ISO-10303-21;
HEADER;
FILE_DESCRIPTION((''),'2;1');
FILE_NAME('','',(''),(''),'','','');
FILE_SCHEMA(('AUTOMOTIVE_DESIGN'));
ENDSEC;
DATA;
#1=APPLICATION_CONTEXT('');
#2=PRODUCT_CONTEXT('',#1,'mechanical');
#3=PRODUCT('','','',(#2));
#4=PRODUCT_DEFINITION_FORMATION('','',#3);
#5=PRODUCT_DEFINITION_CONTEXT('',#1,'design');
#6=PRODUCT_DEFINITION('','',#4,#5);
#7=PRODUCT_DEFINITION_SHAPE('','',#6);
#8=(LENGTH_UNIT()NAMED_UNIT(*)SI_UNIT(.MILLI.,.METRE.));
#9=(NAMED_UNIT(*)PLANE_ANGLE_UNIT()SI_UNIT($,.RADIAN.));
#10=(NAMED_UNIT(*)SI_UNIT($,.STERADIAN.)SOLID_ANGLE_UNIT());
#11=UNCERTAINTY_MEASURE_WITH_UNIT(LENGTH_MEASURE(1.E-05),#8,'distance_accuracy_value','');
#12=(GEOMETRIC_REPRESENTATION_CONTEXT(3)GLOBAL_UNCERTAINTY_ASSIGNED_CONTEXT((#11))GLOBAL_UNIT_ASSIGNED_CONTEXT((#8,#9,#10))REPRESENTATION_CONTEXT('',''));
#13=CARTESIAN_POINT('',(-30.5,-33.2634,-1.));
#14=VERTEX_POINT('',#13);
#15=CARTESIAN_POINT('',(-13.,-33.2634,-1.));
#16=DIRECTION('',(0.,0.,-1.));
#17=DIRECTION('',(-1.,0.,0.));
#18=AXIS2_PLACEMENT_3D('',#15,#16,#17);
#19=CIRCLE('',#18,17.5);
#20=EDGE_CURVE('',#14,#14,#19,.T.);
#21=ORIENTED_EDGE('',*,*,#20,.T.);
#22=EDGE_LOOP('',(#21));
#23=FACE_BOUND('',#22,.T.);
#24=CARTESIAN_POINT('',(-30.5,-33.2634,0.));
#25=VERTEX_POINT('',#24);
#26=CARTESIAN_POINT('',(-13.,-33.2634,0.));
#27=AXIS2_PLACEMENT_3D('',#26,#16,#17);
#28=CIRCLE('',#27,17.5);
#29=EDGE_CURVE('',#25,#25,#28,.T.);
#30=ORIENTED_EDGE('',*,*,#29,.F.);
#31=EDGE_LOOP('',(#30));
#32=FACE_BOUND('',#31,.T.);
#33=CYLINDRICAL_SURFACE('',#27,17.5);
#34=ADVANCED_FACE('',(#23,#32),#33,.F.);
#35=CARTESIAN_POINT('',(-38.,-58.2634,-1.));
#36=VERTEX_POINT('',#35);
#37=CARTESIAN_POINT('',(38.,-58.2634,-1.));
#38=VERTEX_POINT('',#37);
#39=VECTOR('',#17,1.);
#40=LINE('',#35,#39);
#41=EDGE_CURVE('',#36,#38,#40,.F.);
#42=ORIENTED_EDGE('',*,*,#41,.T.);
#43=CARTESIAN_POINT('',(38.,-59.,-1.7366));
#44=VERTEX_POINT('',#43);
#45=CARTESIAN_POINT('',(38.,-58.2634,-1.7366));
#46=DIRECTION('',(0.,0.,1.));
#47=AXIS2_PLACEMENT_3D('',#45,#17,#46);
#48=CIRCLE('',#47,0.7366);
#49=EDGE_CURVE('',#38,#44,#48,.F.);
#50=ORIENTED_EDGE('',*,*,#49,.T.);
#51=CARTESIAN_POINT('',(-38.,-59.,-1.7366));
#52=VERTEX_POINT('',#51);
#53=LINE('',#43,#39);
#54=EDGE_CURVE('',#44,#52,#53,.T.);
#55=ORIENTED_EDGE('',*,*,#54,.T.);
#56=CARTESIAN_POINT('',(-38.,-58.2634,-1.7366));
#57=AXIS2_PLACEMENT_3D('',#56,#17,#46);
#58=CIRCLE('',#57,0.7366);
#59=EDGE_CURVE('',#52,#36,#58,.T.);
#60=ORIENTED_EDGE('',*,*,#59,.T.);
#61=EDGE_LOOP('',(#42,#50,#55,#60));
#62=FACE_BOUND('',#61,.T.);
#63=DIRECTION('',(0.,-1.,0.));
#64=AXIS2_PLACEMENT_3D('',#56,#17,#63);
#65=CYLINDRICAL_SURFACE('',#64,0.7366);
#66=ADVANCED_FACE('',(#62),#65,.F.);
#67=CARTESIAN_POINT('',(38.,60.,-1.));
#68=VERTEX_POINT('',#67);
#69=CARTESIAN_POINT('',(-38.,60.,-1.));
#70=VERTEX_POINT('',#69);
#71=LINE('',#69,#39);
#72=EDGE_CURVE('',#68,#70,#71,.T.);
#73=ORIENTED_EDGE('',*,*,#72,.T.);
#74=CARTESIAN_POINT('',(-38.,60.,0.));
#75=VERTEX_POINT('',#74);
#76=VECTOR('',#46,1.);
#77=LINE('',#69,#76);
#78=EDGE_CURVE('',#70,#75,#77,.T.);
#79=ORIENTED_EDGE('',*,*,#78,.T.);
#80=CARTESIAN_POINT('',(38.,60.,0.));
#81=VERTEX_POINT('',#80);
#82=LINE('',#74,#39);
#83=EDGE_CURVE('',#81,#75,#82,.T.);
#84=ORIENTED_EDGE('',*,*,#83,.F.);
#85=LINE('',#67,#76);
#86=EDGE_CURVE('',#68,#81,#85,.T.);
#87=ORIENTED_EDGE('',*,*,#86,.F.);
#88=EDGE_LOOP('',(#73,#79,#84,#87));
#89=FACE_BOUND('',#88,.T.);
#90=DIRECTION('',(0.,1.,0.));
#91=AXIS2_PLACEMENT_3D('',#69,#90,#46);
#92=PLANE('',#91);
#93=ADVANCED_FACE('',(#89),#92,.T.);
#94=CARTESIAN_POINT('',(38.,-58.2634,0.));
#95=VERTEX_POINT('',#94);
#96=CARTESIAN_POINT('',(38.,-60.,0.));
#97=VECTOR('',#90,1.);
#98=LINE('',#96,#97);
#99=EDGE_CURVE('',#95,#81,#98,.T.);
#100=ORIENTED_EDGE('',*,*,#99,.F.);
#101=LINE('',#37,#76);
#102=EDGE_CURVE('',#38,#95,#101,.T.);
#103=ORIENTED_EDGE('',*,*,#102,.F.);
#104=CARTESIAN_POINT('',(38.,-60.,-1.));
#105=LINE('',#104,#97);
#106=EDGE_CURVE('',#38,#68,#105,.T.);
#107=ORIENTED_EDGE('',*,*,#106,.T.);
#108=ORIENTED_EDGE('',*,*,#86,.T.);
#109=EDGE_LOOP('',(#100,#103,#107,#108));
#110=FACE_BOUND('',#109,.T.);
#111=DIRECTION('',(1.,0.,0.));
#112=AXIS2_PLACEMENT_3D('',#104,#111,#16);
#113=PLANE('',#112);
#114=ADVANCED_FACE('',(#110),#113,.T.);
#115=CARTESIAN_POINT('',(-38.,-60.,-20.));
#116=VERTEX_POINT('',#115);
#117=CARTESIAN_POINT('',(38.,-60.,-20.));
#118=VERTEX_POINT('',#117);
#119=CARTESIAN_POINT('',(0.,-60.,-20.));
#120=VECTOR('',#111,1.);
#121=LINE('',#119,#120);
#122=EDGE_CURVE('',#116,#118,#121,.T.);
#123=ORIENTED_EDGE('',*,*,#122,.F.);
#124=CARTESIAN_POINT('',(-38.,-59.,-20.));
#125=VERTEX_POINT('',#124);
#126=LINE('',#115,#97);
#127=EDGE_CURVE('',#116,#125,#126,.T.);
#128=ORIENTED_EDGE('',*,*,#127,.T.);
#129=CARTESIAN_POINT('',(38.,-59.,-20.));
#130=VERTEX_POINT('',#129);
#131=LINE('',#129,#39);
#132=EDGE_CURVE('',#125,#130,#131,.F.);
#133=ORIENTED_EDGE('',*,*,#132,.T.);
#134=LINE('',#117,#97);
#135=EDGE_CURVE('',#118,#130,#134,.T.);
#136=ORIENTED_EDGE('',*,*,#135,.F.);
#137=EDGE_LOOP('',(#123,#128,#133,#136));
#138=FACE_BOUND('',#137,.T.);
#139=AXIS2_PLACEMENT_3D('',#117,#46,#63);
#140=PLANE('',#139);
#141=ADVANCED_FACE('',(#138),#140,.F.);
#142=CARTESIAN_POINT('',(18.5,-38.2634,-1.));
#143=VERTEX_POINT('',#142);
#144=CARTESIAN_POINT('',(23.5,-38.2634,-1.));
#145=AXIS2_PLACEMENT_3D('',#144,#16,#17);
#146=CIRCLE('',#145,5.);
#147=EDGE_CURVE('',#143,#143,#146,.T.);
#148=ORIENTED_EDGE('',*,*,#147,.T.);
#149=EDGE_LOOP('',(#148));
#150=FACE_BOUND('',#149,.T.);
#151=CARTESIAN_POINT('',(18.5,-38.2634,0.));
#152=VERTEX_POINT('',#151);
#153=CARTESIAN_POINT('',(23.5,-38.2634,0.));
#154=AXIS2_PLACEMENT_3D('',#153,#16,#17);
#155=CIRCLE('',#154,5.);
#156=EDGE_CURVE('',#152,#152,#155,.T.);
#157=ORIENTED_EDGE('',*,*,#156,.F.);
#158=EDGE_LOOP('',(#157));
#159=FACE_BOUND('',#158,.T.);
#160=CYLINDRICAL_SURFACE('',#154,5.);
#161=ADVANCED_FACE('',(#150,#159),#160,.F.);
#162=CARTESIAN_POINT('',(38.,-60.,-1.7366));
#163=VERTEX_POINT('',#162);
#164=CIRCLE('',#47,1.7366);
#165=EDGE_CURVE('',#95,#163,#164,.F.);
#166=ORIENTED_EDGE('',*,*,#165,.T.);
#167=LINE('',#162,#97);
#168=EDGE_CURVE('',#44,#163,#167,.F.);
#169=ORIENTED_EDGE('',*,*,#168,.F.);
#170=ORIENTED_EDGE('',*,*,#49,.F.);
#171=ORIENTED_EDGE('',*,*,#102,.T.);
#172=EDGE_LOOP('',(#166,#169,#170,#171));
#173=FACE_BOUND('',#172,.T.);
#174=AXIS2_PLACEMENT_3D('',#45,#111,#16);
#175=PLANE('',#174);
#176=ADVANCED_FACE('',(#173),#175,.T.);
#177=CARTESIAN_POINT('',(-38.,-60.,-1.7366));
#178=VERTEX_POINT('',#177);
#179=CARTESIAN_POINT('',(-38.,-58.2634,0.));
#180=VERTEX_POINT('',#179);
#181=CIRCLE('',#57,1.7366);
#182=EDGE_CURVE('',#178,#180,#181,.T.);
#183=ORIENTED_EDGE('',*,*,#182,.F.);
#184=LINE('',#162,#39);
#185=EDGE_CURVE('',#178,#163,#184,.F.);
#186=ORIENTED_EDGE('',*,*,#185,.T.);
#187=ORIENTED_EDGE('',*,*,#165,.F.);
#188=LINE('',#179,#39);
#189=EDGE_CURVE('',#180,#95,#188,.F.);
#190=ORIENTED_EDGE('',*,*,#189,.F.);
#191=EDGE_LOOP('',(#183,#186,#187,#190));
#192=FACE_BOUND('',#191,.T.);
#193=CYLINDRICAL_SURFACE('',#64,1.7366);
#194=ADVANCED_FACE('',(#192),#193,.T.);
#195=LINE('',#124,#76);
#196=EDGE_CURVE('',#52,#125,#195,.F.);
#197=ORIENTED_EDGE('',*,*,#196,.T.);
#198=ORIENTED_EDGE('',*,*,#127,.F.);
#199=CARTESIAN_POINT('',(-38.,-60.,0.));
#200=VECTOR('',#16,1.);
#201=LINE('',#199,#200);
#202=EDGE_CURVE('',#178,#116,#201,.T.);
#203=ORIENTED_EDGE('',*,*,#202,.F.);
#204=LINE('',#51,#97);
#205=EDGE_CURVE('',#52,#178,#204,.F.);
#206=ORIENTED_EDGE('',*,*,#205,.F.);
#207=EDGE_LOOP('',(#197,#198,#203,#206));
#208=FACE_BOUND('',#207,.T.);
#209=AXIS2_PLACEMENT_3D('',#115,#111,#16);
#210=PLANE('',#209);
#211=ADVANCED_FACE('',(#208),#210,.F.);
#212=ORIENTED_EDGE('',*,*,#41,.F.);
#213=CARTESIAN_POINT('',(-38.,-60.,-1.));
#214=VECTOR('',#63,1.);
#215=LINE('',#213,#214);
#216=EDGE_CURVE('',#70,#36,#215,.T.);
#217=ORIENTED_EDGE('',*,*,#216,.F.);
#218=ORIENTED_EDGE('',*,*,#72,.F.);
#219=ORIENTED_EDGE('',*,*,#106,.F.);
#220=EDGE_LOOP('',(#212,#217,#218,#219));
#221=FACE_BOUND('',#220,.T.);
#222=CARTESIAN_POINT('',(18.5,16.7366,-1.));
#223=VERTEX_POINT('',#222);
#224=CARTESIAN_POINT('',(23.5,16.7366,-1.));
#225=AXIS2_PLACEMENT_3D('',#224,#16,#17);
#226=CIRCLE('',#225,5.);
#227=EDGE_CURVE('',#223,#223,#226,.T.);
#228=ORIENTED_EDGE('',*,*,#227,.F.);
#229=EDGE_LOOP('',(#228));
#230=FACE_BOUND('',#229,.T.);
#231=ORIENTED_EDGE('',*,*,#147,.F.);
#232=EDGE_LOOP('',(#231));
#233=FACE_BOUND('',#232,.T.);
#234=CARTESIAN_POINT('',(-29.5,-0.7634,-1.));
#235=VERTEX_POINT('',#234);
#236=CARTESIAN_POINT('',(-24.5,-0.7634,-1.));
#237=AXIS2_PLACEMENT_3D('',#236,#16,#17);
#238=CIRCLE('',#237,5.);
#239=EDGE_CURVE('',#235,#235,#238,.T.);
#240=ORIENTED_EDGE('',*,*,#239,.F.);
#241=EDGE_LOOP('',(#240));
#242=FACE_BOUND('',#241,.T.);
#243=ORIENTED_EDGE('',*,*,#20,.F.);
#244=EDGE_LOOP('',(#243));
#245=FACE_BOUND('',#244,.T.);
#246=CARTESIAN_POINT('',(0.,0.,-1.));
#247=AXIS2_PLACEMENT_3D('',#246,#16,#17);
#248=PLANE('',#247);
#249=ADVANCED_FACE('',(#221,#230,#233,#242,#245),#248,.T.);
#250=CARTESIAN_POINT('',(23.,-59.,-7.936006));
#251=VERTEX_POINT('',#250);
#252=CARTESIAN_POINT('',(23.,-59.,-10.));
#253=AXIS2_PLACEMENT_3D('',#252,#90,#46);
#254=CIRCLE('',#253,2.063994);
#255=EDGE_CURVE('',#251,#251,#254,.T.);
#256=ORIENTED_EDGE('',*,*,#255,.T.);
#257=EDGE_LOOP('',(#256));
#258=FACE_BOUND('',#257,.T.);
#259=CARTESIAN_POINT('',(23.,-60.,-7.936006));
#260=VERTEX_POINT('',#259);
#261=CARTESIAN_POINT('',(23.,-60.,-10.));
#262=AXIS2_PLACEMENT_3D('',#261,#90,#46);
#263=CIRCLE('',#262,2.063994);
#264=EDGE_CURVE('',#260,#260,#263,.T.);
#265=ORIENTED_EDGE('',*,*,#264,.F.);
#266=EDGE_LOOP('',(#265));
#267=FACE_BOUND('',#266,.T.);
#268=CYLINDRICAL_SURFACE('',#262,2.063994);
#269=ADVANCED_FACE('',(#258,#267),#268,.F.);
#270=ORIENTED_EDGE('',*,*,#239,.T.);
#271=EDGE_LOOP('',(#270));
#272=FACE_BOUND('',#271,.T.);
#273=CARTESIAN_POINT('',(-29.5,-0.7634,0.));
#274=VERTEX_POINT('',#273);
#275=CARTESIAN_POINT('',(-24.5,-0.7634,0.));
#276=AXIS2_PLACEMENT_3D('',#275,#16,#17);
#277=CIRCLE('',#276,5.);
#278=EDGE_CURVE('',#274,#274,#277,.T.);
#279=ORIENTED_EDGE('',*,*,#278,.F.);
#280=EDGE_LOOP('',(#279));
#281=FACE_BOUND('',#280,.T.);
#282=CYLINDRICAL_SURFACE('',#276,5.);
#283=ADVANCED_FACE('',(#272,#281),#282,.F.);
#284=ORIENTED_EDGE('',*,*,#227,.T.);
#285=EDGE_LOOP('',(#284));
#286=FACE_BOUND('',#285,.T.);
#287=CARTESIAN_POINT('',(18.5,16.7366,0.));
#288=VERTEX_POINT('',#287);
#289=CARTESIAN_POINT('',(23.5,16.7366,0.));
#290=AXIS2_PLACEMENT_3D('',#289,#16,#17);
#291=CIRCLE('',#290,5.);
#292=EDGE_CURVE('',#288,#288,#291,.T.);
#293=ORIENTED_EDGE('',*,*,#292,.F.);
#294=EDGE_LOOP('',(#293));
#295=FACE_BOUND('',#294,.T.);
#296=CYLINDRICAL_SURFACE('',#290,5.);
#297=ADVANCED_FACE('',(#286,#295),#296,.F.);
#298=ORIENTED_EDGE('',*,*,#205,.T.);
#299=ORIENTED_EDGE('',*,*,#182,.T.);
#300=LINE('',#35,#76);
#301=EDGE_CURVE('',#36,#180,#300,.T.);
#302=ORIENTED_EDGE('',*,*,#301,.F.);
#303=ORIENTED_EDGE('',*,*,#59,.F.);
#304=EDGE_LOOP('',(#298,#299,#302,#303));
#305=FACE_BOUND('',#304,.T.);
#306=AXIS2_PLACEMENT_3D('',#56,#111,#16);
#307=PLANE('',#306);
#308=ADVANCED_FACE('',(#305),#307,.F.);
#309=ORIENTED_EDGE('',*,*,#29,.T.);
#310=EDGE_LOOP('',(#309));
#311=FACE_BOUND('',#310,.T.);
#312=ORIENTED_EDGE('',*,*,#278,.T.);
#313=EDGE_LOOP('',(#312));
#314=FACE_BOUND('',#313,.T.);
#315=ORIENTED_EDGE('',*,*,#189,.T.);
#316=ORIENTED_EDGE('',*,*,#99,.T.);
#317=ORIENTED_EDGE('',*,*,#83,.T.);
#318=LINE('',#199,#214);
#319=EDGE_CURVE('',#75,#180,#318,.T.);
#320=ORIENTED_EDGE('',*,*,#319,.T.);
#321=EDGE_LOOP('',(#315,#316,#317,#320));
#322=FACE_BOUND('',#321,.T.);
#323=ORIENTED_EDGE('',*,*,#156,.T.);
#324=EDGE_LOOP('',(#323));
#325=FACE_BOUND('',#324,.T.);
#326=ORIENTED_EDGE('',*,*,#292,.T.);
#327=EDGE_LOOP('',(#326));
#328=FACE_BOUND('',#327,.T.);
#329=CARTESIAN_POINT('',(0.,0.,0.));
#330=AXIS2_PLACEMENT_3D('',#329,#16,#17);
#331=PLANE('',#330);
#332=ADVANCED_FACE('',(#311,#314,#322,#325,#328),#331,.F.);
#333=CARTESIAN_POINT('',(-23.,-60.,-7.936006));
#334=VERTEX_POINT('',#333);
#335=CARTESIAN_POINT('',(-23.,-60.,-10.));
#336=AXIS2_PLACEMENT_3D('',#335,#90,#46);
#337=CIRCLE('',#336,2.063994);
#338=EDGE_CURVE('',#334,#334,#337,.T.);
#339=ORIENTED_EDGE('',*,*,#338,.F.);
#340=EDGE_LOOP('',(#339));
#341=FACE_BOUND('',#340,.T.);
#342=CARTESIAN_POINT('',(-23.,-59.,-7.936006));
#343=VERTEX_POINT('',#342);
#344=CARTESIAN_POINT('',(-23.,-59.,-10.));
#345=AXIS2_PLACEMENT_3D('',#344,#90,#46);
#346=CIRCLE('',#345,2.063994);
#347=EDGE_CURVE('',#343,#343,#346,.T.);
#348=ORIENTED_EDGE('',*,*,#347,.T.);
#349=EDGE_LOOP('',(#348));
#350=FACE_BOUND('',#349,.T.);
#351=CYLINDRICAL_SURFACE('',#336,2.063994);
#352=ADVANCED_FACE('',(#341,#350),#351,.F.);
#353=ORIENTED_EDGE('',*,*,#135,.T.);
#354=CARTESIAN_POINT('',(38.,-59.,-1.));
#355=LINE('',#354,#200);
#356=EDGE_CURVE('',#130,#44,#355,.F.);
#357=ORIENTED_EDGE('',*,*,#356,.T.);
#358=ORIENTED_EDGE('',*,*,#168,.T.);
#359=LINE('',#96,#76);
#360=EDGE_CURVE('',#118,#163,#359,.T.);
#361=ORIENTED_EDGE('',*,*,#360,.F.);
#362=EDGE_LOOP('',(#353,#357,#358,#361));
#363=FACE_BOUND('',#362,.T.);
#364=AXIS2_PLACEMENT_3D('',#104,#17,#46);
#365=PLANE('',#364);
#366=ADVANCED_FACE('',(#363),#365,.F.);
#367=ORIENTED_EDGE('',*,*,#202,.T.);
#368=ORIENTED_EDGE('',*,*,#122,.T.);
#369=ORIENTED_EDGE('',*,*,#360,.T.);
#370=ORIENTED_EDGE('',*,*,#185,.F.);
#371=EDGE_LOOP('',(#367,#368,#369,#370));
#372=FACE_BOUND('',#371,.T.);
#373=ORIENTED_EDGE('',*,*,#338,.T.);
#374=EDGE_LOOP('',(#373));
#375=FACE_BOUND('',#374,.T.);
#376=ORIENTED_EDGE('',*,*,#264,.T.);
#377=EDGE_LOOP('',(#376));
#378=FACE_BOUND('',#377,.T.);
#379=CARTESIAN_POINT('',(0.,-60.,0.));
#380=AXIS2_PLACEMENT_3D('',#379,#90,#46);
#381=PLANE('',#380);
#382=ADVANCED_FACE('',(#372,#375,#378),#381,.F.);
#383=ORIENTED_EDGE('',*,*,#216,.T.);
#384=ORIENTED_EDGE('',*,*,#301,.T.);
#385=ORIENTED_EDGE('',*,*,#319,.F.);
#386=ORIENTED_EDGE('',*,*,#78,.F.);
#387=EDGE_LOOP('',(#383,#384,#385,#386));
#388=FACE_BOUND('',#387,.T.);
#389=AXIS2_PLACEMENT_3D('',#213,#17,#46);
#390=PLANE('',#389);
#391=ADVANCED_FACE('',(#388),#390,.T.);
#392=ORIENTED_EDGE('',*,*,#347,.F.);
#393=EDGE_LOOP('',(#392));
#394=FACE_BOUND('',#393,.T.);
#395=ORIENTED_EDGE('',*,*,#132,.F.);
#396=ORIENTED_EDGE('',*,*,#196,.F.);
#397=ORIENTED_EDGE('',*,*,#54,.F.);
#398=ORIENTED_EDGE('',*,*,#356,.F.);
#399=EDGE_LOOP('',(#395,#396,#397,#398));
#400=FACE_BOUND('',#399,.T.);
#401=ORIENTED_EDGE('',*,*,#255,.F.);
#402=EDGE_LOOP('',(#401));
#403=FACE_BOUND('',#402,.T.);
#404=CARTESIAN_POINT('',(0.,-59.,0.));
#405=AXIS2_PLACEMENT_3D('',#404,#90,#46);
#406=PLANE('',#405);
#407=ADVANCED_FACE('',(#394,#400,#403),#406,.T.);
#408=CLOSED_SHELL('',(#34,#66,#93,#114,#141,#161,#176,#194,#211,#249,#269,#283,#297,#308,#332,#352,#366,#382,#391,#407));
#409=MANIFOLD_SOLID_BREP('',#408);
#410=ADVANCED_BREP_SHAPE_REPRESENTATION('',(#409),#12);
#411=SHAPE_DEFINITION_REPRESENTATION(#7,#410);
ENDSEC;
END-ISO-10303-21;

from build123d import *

# Parameters (mm, degrees)
SKETCH2_W                    = 76
SKETCH2_H                    = 120
BASE_FLANGE1_DEPTH           = 1
EDGE_FLANGE1_STRIP_W         = 5.4732
EDGE_FLANGE1_STRIP_H         = 1
EDGE_FLANGE1_STRIP_CUT_DEPTH = 76
EDGE_FLANGE1_DEPTH           = 76
SKETCH10_R                   = 2.063994429
CUT_EXTRUDE1_DEPTH           = 1
SKETCH11_R                   = 5
SKETCH11_R_2                 = 17.5
CUT_EXTRUDE2_DEPTH           = 1


# Sheet-metal steps are written as plain solids
with BuildPart() as part:
    # Sketch2 → Base-Flange1 (new body)
    with BuildSketch(Plane.XY):
        Rectangle(SKETCH2_W, SKETCH2_H)
    extrude(amount=-BASE_FLANGE1_DEPTH)

    # Edge-Flange1 strip (across the edge) → Edge-Flange1 strip cut (cut)
    with BuildSketch(Plane(origin=(38, -60, -1), x_dir=(0, 1, 0), z_dir=(-1, 0, 0))):
        with Locations((-1, -0.5)):
            Rectangle(EDGE_FLANGE1_STRIP_W, EDGE_FLANGE1_STRIP_H)
    extrude(amount=EDGE_FLANGE1_STRIP_CUT_DEPTH, mode=Mode.SUBTRACT)

    # Edge-Flange1 section (across the edge) → Edge-Flange1 (add)
    with BuildSketch(Plane(origin=(38, -60, -1), x_dir=(0, 1, 0), z_dir=(-1, 0, 0))):
        with BuildLine():
            Line((0, 0.7366), (0, 19))
            Line((0, 19), (1, 19))
            Line((1, 19), (1, 0.7366))
            ThreePointArc((1, 0.7366), (1.215745145, 0.215745145), (1.7366, 0))
            Line((1.7366, 0), (1.7366, -1))
            ThreePointArc((1.7366, -1), (0.508638364, -0.491361636), (0, 0.7366))
        make_face()
    extrude(amount=EDGE_FLANGE1_DEPTH)

    # Sketch10 → Cut-Extrude1 (cut)
    with BuildSketch(Plane(origin=(0, -59, 0), x_dir=(1, 0, 0), z_dir=(0, 1, 0))):
        with Locations(Location((-23, 10, 0), (0, 0, 270))):
            Circle(SKETCH10_R)
        with Locations(Location((23, 10, 0), (0, 0, 270))):
            Circle(SKETCH10_R)
    extrude(amount=-CUT_EXTRUDE1_DEPTH, mode=Mode.SUBTRACT)

    # Sketch11 → Cut-Extrude2 (cut)
    with BuildSketch(Plane(origin=(0, 0, -1), x_dir=(-1, 0, 0), z_dir=(0, 0, -1))):
        with Locations((-23.5, -38.2634)):
            Circle(SKETCH11_R)
        with Locations((13, -33.2634)):
            Circle(SKETCH11_R_2)
        with Locations((24.5, -0.7634)):
            Circle(SKETCH11_R)
        with Locations((-23.5, 16.7366)):
            Circle(SKETCH11_R)
    extrude(amount=-CUT_EXTRUDE2_DEPTH, mode=Mode.SUBTRACT)


solid = part.part
